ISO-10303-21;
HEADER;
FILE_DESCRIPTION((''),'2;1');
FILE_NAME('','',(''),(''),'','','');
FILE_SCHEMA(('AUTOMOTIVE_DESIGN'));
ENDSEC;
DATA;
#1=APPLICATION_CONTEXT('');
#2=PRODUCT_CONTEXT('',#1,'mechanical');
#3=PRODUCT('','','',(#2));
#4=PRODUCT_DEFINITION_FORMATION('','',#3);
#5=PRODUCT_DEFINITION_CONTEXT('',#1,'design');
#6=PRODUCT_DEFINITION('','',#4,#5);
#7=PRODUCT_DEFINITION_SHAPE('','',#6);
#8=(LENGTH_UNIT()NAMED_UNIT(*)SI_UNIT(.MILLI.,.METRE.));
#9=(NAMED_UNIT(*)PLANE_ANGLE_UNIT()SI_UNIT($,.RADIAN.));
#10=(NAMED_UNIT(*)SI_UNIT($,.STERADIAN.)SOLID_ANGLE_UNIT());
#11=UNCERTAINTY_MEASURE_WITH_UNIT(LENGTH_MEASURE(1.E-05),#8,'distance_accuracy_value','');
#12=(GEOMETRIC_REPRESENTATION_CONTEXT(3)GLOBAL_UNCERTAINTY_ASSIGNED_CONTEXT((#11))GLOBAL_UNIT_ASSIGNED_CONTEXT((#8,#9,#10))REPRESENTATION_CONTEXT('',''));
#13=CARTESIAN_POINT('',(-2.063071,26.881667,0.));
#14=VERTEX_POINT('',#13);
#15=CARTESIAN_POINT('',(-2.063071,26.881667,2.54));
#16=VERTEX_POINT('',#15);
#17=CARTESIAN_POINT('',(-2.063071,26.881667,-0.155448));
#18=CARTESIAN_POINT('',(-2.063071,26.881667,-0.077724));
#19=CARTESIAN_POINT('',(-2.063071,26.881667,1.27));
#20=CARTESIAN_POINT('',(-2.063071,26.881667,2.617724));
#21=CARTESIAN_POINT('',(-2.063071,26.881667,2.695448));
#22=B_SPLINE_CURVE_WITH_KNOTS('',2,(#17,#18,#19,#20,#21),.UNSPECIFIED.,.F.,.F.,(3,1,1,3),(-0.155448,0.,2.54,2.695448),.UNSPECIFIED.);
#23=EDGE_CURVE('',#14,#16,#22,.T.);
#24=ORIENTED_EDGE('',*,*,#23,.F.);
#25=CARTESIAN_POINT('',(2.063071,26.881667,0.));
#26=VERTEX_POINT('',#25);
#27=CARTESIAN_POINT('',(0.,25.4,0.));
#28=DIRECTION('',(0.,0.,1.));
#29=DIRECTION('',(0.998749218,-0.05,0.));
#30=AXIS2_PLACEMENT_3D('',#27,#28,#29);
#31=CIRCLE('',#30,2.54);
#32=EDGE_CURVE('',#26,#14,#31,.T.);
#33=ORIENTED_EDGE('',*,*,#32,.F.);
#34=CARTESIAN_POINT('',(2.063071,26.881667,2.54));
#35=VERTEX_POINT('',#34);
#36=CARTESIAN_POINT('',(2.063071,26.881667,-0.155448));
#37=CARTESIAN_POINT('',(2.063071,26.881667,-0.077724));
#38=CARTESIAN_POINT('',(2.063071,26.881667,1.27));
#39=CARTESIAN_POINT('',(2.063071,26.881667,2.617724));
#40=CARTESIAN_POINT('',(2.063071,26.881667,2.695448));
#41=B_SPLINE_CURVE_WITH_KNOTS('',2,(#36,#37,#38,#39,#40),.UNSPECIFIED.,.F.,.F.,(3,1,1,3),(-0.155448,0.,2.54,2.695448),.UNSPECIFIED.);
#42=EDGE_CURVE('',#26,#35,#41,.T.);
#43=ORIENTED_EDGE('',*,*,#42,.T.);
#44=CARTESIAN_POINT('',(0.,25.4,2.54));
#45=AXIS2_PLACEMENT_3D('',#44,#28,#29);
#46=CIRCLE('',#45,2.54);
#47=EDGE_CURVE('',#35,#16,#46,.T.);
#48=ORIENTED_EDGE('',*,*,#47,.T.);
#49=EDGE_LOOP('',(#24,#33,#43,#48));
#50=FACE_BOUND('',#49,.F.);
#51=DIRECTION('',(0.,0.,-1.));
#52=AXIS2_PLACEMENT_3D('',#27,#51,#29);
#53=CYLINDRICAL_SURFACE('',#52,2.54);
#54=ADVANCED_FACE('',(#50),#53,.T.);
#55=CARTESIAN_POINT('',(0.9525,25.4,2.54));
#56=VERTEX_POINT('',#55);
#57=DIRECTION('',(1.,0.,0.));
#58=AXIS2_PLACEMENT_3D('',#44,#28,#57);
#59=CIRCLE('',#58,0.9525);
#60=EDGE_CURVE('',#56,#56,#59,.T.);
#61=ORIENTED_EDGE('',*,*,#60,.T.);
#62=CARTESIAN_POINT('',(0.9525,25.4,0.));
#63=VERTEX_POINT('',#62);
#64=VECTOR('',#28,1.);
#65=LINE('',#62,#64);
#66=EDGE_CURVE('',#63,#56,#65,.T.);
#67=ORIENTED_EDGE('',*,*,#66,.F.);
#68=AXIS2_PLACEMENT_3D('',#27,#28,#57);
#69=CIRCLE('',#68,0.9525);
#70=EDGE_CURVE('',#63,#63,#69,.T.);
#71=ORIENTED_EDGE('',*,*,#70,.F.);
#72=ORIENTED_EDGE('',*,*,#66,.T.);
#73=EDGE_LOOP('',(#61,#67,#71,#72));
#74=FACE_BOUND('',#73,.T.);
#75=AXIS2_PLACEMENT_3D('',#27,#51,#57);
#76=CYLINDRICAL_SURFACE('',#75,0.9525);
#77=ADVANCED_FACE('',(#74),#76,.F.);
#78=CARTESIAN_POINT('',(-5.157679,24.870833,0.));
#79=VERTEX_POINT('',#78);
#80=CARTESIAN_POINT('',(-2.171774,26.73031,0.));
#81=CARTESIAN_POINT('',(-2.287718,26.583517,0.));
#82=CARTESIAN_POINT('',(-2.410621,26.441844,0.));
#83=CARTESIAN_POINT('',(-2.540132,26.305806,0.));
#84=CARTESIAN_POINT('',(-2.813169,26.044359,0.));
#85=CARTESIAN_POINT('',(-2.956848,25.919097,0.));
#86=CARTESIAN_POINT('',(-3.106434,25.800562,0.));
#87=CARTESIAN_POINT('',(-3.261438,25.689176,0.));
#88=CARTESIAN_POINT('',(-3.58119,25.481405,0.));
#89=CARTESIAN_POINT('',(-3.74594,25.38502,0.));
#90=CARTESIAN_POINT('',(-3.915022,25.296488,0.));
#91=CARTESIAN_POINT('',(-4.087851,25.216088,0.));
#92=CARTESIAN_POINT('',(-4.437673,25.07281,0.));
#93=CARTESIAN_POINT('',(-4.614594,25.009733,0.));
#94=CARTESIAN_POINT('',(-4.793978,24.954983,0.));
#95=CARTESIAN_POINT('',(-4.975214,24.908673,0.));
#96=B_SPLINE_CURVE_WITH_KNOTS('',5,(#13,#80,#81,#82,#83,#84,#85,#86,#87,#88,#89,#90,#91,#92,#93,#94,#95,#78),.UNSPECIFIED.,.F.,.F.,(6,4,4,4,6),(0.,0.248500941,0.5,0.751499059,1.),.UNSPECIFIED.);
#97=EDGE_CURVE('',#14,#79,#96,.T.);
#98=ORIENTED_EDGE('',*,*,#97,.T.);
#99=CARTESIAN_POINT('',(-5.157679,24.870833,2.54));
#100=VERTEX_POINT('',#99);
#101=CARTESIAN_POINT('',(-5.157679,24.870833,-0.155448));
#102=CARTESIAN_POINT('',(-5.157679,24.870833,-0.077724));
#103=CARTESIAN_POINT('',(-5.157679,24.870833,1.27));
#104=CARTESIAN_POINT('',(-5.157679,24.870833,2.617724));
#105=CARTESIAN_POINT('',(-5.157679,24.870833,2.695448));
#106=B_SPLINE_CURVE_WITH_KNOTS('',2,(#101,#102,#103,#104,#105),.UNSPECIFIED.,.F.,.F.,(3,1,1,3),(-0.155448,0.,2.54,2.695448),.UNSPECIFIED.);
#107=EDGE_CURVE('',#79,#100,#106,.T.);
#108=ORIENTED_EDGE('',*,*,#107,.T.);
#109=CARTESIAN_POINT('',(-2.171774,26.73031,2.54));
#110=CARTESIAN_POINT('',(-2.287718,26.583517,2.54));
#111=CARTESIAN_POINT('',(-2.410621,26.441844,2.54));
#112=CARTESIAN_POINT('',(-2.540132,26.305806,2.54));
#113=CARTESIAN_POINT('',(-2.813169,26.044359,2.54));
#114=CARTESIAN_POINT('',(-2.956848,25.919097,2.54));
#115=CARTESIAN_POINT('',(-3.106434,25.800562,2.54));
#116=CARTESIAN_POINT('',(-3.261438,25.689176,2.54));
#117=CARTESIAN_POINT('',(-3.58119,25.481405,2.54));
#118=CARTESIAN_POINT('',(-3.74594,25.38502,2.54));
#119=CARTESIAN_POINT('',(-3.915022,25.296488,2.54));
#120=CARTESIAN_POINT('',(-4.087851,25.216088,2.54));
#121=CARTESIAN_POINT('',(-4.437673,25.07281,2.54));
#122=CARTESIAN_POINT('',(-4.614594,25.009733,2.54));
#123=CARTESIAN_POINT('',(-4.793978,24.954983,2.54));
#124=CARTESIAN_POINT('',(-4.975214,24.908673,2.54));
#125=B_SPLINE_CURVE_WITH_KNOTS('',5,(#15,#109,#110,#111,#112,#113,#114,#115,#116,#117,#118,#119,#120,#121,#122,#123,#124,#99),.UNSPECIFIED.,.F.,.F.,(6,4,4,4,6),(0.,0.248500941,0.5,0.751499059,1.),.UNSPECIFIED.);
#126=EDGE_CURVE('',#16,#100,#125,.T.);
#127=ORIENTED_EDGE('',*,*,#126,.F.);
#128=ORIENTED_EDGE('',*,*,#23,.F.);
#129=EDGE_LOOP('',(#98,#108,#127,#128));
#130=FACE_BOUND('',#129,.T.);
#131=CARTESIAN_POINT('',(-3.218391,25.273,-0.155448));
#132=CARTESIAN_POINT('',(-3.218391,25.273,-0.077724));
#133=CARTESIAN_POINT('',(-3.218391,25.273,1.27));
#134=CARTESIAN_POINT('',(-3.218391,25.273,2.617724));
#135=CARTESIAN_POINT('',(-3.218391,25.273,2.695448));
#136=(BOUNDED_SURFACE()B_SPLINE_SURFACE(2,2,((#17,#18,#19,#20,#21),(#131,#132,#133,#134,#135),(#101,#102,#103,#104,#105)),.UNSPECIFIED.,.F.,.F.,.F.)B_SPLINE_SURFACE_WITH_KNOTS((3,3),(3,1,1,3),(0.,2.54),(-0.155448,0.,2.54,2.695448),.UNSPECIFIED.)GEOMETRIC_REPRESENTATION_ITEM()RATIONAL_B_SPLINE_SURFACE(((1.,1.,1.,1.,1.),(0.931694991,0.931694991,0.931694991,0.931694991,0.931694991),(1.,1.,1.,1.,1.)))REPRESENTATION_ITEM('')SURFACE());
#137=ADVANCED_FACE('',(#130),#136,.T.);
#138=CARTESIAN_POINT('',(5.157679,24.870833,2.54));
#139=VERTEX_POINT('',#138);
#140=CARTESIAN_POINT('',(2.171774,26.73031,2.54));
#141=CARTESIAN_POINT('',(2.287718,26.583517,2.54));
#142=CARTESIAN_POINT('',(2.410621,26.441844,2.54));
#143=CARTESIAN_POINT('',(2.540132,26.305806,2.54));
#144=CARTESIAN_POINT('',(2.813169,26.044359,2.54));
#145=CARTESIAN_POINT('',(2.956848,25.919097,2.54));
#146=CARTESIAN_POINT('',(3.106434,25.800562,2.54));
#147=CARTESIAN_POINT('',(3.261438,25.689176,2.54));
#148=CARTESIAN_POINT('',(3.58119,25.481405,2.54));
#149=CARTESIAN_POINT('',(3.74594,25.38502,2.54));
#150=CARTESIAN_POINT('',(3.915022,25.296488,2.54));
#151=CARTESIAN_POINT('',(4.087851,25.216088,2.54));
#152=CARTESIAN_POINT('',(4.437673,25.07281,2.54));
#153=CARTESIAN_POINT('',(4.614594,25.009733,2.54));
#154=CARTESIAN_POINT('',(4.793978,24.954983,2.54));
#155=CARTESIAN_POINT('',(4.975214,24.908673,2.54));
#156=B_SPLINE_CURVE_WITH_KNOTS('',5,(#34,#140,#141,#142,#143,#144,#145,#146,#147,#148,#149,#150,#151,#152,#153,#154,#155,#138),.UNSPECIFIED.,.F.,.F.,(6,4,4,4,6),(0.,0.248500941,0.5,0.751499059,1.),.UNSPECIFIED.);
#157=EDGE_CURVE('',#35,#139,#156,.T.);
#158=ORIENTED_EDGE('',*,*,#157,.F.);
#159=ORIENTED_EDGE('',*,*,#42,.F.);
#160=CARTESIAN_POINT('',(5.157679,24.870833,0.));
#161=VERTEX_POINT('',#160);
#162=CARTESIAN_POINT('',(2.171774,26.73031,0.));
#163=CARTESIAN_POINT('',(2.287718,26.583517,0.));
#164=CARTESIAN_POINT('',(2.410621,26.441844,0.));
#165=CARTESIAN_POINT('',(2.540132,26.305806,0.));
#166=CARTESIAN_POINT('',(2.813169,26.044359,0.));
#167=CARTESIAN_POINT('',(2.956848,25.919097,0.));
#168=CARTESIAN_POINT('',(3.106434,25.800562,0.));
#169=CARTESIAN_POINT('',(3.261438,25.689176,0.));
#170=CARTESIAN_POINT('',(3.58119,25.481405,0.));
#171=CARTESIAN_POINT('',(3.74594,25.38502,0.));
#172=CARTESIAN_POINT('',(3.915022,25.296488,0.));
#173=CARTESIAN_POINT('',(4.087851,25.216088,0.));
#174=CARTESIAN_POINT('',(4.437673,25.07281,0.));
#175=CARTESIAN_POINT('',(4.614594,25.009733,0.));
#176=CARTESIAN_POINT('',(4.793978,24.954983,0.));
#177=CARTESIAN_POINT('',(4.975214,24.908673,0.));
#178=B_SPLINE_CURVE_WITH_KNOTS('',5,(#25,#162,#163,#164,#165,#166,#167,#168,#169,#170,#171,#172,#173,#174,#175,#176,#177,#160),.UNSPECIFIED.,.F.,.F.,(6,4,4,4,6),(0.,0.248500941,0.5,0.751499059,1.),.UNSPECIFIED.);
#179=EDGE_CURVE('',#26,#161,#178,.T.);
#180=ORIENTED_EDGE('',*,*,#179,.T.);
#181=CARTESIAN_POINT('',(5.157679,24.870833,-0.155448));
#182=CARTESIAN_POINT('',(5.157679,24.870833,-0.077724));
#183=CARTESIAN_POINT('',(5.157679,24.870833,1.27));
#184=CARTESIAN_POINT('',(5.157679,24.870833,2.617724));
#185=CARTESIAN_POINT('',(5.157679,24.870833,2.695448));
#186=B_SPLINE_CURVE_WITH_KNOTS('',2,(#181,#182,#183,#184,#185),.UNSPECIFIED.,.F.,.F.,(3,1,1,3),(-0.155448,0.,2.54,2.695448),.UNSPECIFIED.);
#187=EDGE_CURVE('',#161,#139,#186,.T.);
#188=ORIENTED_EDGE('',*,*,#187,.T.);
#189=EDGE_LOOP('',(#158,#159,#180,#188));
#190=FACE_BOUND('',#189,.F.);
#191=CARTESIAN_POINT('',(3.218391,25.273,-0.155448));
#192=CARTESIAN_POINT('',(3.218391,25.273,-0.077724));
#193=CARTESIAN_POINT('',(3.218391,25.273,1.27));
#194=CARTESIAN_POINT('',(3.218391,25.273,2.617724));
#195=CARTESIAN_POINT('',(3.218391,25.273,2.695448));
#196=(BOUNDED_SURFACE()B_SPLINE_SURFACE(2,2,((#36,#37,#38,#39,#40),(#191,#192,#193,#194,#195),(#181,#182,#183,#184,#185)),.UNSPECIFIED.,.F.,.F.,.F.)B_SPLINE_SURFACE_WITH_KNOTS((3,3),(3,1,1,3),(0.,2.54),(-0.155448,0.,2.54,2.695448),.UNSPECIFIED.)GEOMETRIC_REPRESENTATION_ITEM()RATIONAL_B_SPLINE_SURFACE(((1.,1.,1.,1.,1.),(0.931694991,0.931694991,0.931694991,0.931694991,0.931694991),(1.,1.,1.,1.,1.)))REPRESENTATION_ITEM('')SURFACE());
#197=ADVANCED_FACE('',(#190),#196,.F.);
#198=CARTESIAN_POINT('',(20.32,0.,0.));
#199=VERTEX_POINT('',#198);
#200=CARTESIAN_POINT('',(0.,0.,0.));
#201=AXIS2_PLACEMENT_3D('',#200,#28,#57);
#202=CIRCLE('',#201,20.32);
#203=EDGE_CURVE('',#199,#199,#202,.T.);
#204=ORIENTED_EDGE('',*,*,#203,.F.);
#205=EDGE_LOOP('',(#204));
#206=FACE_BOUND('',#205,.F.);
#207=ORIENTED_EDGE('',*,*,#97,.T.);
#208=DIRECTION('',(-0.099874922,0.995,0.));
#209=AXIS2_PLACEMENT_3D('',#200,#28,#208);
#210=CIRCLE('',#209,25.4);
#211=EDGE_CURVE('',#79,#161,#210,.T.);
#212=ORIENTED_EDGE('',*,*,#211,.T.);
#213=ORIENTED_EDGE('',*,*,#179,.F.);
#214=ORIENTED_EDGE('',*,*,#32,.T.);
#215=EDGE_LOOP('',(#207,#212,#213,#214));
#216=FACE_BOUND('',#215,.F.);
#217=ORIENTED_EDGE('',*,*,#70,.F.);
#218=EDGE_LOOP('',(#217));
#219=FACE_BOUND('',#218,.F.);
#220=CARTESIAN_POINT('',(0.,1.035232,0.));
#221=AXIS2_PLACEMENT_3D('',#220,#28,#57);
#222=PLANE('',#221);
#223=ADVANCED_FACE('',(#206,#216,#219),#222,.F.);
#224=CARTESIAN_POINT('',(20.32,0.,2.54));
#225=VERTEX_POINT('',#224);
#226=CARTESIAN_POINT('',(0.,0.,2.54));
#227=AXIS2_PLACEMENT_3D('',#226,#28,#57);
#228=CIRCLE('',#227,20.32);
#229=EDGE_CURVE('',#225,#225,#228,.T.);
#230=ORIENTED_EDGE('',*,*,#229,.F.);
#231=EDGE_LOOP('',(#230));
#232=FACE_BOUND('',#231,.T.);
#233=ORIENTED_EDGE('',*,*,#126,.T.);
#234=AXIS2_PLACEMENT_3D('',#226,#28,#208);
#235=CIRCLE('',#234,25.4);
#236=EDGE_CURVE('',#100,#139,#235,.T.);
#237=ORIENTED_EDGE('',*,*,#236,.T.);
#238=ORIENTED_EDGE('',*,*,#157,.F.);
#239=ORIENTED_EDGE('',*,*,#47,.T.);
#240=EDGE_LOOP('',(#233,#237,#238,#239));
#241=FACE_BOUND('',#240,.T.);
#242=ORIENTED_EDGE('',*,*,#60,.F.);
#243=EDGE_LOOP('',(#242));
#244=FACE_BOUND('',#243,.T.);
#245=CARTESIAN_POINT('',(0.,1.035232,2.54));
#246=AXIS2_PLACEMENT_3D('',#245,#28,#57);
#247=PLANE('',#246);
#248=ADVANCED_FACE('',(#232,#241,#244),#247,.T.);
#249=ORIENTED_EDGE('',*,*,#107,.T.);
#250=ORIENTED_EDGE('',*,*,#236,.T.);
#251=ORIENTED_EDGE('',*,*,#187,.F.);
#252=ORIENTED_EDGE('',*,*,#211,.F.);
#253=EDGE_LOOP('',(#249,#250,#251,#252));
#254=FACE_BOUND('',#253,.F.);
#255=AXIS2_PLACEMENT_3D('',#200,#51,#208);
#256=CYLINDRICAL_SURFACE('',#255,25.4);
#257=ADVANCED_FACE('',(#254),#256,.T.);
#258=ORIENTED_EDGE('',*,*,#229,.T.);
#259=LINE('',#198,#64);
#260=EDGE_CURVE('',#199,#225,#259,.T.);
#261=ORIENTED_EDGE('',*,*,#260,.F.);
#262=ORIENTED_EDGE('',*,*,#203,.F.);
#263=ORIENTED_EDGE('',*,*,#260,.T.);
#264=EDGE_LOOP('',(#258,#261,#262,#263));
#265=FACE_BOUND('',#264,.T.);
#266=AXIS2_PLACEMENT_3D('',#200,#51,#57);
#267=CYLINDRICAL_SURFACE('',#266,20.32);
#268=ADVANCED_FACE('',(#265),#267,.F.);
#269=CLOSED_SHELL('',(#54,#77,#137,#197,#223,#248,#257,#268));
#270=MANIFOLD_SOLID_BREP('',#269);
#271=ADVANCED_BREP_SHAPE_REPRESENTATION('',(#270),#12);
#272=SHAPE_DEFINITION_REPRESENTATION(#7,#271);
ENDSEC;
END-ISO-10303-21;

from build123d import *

# Parameters (mm, degrees)
F0_R     = 20.32
F0_R_2   = 0.9525
F1_DEPTH = 2.54
F2_R     = 5.08


with BuildPart() as f1:
    # F0 (on Top) → F1 (new body)
    with BuildSketch(Plane.XY):
        with BuildLine():
            ThreePointArc((2.5368230131, 25.273), (0, 27.94), (-2.5368230131, 25.273))
            ThreePointArc((-2.5368230131, 25.273), (0, -25.4), (2.5368230131, 25.273))
        make_face()
        Circle(F0_R, mode=Mode.SUBTRACT)
        with Locations((0, 25.4)):
            Circle(F0_R_2, mode=Mode.SUBTRACT)
    extrude(amount=F1_DEPTH)

    # F2
    f2_edges = [f1.edges().sort_by_distance(p)[0] for p in [
        (-2.536823, 25.273, 1.27),
        (2.536823, 25.273, 1.27),
    ]]
    fillet(f2_edges, radius=F2_R)


solid = f1.part
